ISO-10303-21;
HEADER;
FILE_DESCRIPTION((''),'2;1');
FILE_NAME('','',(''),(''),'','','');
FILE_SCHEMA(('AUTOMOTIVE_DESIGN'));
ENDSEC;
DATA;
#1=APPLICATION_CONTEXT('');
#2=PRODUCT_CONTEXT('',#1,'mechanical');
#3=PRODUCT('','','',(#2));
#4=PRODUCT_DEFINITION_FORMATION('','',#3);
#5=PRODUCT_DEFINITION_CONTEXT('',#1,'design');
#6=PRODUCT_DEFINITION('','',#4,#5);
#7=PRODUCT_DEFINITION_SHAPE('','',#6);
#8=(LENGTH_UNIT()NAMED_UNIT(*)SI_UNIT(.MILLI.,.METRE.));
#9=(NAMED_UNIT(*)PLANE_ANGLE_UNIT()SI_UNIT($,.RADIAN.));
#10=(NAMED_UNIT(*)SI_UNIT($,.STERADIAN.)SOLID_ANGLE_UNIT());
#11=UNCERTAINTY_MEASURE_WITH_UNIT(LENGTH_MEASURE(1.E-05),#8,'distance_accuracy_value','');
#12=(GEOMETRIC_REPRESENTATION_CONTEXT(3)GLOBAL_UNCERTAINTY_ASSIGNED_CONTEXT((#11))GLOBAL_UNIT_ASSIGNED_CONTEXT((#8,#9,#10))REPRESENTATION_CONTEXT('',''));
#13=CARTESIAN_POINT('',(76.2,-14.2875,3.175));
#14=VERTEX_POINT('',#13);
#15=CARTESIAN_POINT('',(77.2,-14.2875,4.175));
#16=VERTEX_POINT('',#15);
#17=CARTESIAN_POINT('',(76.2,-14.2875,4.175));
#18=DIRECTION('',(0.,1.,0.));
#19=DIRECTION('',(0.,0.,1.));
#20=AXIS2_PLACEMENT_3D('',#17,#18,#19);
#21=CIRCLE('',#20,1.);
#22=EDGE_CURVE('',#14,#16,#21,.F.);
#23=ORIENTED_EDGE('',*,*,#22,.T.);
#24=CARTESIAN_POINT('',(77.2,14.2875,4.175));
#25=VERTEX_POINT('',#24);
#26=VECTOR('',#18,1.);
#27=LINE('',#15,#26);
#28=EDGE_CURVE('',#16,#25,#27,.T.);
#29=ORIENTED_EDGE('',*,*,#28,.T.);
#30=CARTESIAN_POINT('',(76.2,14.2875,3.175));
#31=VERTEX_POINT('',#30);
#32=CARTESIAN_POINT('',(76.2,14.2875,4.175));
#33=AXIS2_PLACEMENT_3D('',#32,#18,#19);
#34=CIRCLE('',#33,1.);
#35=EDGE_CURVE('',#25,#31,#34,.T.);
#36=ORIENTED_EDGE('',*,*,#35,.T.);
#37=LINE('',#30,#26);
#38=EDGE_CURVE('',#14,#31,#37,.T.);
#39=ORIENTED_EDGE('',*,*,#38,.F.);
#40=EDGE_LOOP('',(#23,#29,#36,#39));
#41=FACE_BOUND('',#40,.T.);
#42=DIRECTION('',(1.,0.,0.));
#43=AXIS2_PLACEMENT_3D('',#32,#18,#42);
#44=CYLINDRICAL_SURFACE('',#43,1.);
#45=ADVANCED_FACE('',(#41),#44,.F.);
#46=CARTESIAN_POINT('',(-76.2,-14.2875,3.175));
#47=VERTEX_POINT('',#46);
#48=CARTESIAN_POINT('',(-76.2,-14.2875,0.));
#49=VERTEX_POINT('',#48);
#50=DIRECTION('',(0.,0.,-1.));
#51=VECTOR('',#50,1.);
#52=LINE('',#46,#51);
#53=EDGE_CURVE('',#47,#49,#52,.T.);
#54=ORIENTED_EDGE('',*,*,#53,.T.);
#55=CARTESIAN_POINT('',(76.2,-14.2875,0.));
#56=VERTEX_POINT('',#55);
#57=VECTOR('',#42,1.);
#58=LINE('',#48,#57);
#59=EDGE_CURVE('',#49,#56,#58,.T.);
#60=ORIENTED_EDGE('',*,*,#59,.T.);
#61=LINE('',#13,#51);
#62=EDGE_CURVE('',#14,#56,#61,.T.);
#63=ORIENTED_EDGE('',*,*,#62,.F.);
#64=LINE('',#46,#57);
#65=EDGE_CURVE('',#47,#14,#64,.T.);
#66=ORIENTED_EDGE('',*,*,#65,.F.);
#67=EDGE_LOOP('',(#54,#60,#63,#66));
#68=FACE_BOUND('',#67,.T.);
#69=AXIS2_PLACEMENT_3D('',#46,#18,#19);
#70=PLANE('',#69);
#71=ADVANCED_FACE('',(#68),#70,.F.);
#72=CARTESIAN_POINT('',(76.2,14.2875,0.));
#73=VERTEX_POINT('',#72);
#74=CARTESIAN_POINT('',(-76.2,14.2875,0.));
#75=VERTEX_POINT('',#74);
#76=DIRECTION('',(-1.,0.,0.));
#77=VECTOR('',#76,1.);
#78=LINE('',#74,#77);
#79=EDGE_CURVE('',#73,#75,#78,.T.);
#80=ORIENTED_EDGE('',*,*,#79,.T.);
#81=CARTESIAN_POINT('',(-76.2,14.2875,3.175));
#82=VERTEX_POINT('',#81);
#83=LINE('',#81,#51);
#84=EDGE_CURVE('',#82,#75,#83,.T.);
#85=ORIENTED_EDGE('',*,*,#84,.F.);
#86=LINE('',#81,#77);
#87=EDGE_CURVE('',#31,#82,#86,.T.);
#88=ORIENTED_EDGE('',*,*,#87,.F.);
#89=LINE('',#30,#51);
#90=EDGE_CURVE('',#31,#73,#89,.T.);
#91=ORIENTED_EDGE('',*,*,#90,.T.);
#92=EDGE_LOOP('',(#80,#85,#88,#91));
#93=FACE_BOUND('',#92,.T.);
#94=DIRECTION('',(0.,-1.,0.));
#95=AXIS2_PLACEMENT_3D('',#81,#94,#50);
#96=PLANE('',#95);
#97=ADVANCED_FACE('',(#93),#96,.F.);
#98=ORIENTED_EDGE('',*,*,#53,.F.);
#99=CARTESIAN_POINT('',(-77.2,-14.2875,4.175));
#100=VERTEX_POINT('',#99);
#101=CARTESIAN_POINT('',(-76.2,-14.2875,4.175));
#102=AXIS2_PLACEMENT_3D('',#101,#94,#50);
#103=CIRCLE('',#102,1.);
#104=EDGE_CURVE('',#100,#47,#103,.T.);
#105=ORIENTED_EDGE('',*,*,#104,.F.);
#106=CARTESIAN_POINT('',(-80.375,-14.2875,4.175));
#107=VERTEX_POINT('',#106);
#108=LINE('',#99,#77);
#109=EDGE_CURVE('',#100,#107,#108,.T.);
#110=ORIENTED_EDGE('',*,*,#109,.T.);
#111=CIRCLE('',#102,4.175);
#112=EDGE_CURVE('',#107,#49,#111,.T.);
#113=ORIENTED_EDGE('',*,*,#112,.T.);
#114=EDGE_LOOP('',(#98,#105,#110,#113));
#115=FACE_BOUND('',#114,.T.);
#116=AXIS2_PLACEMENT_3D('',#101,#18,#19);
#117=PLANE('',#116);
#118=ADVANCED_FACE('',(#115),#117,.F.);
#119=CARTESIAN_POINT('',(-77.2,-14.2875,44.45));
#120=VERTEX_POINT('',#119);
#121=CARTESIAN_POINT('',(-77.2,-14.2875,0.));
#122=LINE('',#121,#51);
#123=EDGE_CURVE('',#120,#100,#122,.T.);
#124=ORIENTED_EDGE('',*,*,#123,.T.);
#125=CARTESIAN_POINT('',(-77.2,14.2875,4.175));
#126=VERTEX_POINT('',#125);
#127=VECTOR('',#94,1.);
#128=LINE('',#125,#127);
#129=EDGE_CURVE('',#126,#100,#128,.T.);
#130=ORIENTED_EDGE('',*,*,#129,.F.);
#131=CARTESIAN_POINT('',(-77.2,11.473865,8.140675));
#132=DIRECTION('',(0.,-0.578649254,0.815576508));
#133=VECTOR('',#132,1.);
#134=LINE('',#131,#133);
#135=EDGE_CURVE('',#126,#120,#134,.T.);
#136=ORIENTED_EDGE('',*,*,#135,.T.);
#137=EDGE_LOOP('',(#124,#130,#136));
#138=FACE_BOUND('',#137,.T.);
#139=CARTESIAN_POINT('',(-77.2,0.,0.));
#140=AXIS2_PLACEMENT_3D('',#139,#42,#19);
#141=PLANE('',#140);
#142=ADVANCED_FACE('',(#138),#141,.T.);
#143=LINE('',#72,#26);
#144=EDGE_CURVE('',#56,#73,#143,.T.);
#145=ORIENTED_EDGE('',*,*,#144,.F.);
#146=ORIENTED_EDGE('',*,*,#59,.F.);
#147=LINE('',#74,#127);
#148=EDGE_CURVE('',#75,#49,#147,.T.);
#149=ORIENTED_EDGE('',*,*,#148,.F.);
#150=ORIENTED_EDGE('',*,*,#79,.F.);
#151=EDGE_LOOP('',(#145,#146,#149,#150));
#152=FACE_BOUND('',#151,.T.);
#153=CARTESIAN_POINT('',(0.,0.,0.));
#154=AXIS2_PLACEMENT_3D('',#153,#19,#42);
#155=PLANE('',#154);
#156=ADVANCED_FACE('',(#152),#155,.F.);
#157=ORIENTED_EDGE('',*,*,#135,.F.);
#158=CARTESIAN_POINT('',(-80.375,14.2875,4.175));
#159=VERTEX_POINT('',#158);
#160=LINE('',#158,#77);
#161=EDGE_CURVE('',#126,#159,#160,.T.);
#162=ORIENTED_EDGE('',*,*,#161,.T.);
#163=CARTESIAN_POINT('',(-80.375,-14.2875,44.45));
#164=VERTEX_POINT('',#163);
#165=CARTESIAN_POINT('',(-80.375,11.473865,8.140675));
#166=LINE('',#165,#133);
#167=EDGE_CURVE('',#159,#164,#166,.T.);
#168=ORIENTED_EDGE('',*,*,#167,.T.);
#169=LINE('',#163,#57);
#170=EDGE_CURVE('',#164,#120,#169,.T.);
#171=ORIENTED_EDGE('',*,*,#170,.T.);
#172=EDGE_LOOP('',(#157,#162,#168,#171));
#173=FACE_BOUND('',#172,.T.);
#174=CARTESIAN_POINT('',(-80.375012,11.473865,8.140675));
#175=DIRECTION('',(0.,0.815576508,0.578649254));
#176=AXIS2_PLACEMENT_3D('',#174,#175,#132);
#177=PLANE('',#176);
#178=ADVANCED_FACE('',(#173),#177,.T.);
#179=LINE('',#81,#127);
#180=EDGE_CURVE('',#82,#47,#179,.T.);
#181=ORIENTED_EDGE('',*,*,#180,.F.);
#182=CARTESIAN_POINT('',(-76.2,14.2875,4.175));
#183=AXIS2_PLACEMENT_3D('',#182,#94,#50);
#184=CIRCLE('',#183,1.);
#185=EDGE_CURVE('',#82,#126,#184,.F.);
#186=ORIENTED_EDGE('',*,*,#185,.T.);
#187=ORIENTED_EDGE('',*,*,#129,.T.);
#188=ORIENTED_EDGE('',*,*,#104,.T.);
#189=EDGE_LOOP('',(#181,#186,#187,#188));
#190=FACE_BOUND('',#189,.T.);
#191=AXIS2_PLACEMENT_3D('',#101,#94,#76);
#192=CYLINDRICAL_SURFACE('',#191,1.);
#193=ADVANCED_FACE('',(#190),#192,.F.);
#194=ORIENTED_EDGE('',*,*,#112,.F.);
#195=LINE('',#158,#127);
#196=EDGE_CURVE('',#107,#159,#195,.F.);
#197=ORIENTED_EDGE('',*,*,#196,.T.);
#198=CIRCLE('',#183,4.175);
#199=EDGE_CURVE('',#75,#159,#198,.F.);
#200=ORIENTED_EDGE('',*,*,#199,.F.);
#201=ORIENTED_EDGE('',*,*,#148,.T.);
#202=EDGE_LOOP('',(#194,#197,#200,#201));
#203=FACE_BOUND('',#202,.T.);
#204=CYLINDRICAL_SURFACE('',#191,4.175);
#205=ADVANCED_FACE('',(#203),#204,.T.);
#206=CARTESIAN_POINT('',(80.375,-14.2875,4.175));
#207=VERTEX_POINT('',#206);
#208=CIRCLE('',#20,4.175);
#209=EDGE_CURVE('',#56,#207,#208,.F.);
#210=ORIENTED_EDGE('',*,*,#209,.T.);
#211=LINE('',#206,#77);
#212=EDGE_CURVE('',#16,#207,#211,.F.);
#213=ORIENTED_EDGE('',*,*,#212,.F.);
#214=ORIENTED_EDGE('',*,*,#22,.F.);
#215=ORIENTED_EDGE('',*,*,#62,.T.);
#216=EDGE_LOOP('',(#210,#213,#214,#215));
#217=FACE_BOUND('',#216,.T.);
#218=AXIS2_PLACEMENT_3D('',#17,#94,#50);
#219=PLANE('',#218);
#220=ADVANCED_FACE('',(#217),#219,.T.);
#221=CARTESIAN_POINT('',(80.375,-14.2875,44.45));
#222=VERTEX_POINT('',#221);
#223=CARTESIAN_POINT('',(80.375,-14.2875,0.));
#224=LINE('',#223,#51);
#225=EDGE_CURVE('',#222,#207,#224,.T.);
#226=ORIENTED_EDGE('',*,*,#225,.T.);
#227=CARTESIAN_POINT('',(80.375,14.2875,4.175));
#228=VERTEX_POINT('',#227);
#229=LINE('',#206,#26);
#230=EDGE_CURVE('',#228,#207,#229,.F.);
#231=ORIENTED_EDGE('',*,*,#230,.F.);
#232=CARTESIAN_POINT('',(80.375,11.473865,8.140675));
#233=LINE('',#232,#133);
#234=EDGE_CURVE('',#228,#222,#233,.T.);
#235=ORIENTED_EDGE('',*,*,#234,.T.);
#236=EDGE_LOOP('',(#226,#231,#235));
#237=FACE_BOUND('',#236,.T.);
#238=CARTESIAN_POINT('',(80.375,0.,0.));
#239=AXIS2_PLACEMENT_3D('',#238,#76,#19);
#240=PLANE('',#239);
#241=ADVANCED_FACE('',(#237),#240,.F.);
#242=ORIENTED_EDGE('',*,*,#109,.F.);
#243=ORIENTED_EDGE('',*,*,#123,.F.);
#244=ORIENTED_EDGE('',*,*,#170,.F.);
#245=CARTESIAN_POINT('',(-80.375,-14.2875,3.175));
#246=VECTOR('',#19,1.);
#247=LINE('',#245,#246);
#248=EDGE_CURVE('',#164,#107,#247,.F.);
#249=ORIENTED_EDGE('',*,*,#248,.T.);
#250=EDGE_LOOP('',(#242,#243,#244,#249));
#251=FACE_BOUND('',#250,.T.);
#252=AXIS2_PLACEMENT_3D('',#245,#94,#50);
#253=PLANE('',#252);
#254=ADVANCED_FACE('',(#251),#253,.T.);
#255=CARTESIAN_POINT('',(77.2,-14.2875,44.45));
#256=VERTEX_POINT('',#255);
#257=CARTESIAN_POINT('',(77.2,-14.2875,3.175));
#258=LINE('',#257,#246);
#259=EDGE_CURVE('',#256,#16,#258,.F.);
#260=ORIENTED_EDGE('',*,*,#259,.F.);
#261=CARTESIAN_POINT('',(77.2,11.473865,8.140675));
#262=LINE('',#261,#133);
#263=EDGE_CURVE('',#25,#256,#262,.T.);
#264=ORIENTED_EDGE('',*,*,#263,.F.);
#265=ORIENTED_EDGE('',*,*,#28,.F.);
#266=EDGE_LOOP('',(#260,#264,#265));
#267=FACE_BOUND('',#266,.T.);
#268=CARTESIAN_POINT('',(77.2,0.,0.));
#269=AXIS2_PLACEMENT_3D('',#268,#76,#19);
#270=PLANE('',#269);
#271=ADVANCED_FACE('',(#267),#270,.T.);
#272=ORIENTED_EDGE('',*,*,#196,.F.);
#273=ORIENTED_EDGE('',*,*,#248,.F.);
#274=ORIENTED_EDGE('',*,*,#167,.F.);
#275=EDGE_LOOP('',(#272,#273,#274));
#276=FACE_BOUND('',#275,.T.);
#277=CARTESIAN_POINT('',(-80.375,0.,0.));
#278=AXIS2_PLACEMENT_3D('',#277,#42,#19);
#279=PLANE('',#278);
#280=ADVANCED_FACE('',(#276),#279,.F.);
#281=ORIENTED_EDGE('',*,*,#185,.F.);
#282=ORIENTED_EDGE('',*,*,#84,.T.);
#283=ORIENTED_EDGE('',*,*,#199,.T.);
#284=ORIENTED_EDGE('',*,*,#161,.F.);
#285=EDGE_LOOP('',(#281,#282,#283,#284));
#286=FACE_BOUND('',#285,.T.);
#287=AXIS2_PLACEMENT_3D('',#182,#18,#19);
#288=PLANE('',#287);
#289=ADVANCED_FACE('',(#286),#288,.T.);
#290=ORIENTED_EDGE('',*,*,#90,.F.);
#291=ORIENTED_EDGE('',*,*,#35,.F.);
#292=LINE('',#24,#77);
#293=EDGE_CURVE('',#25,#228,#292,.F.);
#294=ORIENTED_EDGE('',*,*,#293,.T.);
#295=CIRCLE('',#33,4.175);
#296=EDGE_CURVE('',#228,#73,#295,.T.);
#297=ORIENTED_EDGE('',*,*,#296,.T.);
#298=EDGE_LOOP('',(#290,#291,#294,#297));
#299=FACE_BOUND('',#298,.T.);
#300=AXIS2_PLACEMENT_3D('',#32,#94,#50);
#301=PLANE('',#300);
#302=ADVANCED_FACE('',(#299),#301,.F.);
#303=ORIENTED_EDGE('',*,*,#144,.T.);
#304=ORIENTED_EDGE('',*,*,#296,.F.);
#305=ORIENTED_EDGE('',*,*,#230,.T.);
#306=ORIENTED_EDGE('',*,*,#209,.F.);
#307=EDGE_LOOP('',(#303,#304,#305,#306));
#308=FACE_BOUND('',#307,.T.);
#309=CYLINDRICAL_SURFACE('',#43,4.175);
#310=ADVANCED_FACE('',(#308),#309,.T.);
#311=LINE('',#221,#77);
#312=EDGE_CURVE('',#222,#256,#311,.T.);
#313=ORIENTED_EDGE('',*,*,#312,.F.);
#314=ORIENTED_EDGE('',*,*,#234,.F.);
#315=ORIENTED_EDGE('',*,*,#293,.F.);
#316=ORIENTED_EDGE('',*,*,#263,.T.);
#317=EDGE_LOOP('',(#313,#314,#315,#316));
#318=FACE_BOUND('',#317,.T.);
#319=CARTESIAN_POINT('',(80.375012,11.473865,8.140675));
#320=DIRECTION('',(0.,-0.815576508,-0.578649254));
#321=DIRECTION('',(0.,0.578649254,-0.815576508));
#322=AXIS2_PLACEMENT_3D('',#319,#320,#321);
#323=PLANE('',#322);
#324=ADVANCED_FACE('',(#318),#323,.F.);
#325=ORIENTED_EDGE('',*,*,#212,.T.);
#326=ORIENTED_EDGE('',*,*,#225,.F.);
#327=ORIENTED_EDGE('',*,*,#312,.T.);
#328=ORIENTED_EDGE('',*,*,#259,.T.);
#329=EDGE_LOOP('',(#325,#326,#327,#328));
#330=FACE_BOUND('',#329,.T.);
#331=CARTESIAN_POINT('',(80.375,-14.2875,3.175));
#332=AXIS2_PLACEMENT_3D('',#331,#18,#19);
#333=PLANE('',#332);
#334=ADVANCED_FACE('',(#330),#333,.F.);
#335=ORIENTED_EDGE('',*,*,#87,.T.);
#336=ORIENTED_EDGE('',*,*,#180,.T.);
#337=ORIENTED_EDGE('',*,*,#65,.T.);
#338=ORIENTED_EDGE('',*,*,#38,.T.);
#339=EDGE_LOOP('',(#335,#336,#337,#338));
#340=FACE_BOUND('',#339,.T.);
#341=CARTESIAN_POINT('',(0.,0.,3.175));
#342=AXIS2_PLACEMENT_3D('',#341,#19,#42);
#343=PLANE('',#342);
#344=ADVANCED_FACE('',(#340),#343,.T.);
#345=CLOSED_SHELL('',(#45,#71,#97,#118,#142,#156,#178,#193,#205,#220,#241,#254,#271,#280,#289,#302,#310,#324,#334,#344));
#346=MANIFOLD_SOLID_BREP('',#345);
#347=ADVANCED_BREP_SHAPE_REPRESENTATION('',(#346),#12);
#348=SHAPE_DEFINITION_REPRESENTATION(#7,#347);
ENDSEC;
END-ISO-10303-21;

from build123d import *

# Parameters (mm, degrees)
SKETCH2_W          = 152.4
SKETCH2_H          = 28.575
BASE_FLANGE1_DEPTH = 3.175
EDGE_FLANGE1_DEPTH = 28.575
CUT_EXTRUDE1_START = -3.175
CUT_EXTRUDE1_DEPTH = 167.563083351


# Sheet-metal steps are written as plain solids
with BuildPart() as part:
    # Sketch2 → Base-Flange1 (new body)
    with BuildSketch(Plane.XY):
        Rectangle(SKETCH2_W, SKETCH2_H)
    extrude(amount=BASE_FLANGE1_DEPTH)

    # Edge-Flange1 section (across the edge) → Edge-Flange1 (add)
    with BuildSketch(Plane(origin=(77.2, -14.2875, 3.175), x_dir=(-1, 0, 0), z_dir=(0, 1, 0))):
        with BuildLine():
            Line((-3.175, 1), (-3.175, 41.275))
            Line((-3.175, 41.275), (0, 41.275))
            Line((0, 41.275), (0, 1))
            ThreePointArc((0, 1), (0.292893219, 0.292893219), (1, 0))
            Line((1, 0), (1, -3.175))
            ThreePointArc((1, -3.175), (-1.952170811, -1.952170811), (-3.175, 1))
        make_face()
    edge_flange1 = extrude(amount=EDGE_FLANGE1_DEPTH)

    # Sketch10 → Cut-Extrude1 (cut)
    with BuildSketch(Plane(origin=(80.375, 0, 0), x_dir=(0, 0, -1), z_dir=(1, 0, 0)).offset(CUT_EXTRUDE1_START)):
        Polygon((-4.175, 14.2875), (-44.45, -14.2875), (-44.45, 14.2875), align=None)
    cut_extrude1 = extrude(amount=CUT_EXTRUDE1_DEPTH, mode=Mode.SUBTRACT)

    # Mirror1: Edge-Flange1, Cut-Extrude1 across plane
    add(edge_flange1.mirror(Plane(origin=(0, 0, 0), x_dir=(0, 0, 1), z_dir=(1, 0, 0))))
    add(cut_extrude1.mirror(Plane(origin=(0, 0, 0), x_dir=(0, 0, 1), z_dir=(1, 0, 0))), mode=Mode.SUBTRACT)


solid = part.part
